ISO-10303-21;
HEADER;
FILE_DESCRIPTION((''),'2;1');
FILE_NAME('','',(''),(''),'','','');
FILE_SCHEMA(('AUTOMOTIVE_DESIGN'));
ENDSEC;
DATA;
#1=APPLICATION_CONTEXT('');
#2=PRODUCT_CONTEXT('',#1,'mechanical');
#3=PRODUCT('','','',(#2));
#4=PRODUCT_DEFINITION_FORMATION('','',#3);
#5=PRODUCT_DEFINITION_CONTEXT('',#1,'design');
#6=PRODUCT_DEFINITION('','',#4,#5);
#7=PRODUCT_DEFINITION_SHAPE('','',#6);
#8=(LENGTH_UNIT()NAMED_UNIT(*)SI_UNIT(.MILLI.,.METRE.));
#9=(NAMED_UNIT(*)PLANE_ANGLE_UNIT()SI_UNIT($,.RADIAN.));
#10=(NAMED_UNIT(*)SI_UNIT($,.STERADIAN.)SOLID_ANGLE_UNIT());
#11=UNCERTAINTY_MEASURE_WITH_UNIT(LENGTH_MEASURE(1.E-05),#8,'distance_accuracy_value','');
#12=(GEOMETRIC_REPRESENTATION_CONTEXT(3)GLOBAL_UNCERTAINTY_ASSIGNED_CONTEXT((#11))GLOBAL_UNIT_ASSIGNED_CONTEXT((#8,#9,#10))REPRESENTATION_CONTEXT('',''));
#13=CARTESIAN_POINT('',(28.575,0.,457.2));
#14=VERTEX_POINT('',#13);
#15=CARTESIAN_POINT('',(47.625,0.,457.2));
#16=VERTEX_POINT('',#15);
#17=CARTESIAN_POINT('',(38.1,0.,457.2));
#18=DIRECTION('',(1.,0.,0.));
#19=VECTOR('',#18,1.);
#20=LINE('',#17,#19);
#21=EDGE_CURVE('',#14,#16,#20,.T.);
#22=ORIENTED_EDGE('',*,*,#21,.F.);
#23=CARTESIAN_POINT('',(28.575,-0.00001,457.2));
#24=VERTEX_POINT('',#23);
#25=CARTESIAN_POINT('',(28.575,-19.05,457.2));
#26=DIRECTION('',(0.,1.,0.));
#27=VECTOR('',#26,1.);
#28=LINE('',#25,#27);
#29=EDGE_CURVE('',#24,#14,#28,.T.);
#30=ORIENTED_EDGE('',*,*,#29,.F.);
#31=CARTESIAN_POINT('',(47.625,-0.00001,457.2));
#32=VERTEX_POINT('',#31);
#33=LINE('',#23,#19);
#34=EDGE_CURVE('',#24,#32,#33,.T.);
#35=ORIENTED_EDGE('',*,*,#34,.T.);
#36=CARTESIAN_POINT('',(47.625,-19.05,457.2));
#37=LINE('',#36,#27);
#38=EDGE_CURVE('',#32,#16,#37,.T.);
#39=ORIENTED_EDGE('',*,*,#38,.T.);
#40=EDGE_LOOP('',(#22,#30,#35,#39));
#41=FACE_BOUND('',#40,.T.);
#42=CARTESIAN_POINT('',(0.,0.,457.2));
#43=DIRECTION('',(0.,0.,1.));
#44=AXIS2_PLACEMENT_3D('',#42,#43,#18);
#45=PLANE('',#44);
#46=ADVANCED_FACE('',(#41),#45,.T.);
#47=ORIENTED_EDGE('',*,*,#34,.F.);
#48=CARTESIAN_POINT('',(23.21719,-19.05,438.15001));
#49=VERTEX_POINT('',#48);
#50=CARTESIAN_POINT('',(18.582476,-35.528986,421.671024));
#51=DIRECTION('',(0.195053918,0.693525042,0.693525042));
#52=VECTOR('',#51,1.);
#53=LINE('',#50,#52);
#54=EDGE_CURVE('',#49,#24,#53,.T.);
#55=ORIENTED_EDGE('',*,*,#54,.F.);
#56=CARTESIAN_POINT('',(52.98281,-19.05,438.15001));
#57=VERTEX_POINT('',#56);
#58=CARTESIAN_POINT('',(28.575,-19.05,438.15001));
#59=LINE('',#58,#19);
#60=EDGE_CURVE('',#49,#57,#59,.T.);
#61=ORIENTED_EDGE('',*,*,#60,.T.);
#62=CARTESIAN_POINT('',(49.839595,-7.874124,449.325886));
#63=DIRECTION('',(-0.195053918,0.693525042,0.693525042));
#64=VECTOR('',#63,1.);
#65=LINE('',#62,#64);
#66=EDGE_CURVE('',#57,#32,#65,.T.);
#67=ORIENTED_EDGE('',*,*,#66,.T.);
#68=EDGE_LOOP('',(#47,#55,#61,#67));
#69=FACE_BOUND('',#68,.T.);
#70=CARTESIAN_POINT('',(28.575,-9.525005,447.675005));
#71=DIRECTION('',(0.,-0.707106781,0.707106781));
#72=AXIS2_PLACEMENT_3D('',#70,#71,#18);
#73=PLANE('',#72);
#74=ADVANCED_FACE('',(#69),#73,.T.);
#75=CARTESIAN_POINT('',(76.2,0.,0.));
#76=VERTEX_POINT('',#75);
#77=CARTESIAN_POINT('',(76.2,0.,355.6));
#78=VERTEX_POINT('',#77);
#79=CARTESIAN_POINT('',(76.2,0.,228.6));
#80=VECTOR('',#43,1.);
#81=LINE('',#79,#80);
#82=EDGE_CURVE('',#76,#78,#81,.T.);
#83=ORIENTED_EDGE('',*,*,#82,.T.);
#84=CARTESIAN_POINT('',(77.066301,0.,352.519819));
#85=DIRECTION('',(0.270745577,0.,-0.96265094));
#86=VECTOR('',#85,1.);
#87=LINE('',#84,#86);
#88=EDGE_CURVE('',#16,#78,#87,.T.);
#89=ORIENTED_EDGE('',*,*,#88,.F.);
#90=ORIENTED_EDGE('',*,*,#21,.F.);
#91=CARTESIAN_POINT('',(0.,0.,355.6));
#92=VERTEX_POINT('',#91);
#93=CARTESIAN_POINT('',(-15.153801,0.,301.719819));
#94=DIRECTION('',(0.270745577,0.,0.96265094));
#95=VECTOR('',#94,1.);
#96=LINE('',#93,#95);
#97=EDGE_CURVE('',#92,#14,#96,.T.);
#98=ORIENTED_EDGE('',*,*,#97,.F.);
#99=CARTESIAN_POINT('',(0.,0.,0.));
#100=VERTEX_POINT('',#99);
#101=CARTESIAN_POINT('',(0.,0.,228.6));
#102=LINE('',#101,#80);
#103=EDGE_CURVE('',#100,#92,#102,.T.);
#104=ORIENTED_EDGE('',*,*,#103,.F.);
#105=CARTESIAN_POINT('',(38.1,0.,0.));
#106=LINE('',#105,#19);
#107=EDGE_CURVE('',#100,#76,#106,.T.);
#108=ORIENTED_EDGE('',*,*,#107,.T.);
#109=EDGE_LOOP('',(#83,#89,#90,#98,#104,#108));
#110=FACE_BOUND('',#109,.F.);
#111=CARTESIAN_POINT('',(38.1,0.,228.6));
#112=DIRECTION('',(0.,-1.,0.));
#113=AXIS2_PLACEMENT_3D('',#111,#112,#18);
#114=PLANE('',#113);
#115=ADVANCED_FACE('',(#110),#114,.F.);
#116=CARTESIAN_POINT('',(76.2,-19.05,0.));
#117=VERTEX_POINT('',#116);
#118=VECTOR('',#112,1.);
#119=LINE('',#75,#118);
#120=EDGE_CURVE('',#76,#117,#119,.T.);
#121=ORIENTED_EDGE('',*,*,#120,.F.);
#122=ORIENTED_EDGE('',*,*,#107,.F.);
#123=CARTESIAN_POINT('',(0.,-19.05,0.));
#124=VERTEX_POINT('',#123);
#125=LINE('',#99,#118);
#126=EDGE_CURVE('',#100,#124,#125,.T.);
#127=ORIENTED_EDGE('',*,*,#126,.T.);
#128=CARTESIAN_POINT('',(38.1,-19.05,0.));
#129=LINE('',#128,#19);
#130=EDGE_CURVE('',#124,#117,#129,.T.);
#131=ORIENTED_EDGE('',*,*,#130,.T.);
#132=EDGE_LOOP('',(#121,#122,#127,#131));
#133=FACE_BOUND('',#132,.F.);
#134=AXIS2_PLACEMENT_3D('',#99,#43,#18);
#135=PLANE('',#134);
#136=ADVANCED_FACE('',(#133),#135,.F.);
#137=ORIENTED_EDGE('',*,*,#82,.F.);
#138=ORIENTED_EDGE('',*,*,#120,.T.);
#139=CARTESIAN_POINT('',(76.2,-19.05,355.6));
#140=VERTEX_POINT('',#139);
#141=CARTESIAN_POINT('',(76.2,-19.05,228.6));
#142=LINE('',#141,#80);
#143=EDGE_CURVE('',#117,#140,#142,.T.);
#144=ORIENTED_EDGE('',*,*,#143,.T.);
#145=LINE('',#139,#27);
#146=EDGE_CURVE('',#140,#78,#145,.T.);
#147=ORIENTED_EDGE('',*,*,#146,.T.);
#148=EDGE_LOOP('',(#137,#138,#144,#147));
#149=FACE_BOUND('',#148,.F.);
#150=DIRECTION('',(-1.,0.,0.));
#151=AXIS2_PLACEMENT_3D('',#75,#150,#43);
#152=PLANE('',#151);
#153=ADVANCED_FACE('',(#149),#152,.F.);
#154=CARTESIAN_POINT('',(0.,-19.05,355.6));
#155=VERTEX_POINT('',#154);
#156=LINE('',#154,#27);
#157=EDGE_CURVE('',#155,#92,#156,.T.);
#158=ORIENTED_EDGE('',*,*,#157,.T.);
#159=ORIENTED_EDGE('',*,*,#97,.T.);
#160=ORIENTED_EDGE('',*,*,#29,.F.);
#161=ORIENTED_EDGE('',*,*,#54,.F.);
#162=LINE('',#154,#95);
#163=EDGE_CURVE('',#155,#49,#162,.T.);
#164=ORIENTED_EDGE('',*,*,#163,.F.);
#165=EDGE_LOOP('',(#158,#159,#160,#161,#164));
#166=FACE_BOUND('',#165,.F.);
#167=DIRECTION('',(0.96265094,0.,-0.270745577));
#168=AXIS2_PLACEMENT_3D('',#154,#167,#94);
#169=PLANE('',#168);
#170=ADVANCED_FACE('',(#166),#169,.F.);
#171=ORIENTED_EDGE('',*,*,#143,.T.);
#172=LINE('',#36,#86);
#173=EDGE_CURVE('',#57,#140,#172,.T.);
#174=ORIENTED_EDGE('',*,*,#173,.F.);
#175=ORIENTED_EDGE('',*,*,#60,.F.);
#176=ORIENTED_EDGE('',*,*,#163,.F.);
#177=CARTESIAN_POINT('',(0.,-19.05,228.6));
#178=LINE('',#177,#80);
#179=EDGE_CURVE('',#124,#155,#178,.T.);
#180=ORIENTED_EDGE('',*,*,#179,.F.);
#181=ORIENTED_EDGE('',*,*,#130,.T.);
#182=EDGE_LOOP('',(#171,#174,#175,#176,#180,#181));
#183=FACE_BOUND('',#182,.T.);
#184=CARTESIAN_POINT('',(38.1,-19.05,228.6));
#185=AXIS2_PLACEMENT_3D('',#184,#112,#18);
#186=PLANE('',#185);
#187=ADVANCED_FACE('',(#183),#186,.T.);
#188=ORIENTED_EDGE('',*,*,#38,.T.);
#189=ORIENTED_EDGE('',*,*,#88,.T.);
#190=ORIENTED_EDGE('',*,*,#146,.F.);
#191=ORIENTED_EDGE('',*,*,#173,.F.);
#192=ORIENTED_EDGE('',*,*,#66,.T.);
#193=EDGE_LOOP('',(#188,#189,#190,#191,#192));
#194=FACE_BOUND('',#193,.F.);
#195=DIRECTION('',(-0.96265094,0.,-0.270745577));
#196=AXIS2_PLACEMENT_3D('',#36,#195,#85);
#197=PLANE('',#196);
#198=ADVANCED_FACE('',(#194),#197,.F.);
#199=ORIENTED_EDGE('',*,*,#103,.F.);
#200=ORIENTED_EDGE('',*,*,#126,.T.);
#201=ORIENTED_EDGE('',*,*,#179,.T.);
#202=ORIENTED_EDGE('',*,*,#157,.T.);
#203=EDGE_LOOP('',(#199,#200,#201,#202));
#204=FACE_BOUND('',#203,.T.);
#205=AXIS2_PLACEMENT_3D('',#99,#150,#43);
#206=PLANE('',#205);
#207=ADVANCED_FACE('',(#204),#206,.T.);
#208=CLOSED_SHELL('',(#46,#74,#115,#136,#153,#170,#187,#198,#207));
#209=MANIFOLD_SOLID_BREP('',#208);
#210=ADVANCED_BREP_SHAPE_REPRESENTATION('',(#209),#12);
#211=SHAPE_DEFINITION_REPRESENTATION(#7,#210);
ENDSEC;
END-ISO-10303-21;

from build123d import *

# Parameters (mm, degrees)
F0_W     = 76.2
F0_H     = 457.2
F1_DEPTH = 19.05
F3_DEPTH = 19.051
F4_SIZE  = 19.04999


# Not quite as in the source:
# - a fillet or chamfer is up to 0.001 mm smaller than in the source, because OpenCascade refuses the exact size


with BuildPart() as f1:
    # F0 (on Front) → F1 (new body)
    with BuildSketch(Plane.XZ):
        with Locations((38.1, 228.6)):
            Rectangle(F0_W, F0_H)
    extrude(amount=F1_DEPTH)

    # F2 (on face) → F3 (cut, through all)
    with BuildSketch(Plane.XZ.offset(19.05)):
        Polygon((0, 355.6), (28.575, 457.2), (0, 457.2), align=None)
        Polygon((76.2, 457.2), (47.625, 457.2), (76.2, 355.6), align=None)
    extrude(amount=-F3_DEPTH, mode=Mode.SUBTRACT)

    # F4 (size 19.05 in the source; OpenCascade refuses exactly that, so slightly less here)
    f4_edges = [f1.edges().sort_by_distance(p)[0] for p in [
        (38.1, -19.05, 457.2),
    ]]
    chamfer(f4_edges, length=F4_SIZE)


solid = f1.part
